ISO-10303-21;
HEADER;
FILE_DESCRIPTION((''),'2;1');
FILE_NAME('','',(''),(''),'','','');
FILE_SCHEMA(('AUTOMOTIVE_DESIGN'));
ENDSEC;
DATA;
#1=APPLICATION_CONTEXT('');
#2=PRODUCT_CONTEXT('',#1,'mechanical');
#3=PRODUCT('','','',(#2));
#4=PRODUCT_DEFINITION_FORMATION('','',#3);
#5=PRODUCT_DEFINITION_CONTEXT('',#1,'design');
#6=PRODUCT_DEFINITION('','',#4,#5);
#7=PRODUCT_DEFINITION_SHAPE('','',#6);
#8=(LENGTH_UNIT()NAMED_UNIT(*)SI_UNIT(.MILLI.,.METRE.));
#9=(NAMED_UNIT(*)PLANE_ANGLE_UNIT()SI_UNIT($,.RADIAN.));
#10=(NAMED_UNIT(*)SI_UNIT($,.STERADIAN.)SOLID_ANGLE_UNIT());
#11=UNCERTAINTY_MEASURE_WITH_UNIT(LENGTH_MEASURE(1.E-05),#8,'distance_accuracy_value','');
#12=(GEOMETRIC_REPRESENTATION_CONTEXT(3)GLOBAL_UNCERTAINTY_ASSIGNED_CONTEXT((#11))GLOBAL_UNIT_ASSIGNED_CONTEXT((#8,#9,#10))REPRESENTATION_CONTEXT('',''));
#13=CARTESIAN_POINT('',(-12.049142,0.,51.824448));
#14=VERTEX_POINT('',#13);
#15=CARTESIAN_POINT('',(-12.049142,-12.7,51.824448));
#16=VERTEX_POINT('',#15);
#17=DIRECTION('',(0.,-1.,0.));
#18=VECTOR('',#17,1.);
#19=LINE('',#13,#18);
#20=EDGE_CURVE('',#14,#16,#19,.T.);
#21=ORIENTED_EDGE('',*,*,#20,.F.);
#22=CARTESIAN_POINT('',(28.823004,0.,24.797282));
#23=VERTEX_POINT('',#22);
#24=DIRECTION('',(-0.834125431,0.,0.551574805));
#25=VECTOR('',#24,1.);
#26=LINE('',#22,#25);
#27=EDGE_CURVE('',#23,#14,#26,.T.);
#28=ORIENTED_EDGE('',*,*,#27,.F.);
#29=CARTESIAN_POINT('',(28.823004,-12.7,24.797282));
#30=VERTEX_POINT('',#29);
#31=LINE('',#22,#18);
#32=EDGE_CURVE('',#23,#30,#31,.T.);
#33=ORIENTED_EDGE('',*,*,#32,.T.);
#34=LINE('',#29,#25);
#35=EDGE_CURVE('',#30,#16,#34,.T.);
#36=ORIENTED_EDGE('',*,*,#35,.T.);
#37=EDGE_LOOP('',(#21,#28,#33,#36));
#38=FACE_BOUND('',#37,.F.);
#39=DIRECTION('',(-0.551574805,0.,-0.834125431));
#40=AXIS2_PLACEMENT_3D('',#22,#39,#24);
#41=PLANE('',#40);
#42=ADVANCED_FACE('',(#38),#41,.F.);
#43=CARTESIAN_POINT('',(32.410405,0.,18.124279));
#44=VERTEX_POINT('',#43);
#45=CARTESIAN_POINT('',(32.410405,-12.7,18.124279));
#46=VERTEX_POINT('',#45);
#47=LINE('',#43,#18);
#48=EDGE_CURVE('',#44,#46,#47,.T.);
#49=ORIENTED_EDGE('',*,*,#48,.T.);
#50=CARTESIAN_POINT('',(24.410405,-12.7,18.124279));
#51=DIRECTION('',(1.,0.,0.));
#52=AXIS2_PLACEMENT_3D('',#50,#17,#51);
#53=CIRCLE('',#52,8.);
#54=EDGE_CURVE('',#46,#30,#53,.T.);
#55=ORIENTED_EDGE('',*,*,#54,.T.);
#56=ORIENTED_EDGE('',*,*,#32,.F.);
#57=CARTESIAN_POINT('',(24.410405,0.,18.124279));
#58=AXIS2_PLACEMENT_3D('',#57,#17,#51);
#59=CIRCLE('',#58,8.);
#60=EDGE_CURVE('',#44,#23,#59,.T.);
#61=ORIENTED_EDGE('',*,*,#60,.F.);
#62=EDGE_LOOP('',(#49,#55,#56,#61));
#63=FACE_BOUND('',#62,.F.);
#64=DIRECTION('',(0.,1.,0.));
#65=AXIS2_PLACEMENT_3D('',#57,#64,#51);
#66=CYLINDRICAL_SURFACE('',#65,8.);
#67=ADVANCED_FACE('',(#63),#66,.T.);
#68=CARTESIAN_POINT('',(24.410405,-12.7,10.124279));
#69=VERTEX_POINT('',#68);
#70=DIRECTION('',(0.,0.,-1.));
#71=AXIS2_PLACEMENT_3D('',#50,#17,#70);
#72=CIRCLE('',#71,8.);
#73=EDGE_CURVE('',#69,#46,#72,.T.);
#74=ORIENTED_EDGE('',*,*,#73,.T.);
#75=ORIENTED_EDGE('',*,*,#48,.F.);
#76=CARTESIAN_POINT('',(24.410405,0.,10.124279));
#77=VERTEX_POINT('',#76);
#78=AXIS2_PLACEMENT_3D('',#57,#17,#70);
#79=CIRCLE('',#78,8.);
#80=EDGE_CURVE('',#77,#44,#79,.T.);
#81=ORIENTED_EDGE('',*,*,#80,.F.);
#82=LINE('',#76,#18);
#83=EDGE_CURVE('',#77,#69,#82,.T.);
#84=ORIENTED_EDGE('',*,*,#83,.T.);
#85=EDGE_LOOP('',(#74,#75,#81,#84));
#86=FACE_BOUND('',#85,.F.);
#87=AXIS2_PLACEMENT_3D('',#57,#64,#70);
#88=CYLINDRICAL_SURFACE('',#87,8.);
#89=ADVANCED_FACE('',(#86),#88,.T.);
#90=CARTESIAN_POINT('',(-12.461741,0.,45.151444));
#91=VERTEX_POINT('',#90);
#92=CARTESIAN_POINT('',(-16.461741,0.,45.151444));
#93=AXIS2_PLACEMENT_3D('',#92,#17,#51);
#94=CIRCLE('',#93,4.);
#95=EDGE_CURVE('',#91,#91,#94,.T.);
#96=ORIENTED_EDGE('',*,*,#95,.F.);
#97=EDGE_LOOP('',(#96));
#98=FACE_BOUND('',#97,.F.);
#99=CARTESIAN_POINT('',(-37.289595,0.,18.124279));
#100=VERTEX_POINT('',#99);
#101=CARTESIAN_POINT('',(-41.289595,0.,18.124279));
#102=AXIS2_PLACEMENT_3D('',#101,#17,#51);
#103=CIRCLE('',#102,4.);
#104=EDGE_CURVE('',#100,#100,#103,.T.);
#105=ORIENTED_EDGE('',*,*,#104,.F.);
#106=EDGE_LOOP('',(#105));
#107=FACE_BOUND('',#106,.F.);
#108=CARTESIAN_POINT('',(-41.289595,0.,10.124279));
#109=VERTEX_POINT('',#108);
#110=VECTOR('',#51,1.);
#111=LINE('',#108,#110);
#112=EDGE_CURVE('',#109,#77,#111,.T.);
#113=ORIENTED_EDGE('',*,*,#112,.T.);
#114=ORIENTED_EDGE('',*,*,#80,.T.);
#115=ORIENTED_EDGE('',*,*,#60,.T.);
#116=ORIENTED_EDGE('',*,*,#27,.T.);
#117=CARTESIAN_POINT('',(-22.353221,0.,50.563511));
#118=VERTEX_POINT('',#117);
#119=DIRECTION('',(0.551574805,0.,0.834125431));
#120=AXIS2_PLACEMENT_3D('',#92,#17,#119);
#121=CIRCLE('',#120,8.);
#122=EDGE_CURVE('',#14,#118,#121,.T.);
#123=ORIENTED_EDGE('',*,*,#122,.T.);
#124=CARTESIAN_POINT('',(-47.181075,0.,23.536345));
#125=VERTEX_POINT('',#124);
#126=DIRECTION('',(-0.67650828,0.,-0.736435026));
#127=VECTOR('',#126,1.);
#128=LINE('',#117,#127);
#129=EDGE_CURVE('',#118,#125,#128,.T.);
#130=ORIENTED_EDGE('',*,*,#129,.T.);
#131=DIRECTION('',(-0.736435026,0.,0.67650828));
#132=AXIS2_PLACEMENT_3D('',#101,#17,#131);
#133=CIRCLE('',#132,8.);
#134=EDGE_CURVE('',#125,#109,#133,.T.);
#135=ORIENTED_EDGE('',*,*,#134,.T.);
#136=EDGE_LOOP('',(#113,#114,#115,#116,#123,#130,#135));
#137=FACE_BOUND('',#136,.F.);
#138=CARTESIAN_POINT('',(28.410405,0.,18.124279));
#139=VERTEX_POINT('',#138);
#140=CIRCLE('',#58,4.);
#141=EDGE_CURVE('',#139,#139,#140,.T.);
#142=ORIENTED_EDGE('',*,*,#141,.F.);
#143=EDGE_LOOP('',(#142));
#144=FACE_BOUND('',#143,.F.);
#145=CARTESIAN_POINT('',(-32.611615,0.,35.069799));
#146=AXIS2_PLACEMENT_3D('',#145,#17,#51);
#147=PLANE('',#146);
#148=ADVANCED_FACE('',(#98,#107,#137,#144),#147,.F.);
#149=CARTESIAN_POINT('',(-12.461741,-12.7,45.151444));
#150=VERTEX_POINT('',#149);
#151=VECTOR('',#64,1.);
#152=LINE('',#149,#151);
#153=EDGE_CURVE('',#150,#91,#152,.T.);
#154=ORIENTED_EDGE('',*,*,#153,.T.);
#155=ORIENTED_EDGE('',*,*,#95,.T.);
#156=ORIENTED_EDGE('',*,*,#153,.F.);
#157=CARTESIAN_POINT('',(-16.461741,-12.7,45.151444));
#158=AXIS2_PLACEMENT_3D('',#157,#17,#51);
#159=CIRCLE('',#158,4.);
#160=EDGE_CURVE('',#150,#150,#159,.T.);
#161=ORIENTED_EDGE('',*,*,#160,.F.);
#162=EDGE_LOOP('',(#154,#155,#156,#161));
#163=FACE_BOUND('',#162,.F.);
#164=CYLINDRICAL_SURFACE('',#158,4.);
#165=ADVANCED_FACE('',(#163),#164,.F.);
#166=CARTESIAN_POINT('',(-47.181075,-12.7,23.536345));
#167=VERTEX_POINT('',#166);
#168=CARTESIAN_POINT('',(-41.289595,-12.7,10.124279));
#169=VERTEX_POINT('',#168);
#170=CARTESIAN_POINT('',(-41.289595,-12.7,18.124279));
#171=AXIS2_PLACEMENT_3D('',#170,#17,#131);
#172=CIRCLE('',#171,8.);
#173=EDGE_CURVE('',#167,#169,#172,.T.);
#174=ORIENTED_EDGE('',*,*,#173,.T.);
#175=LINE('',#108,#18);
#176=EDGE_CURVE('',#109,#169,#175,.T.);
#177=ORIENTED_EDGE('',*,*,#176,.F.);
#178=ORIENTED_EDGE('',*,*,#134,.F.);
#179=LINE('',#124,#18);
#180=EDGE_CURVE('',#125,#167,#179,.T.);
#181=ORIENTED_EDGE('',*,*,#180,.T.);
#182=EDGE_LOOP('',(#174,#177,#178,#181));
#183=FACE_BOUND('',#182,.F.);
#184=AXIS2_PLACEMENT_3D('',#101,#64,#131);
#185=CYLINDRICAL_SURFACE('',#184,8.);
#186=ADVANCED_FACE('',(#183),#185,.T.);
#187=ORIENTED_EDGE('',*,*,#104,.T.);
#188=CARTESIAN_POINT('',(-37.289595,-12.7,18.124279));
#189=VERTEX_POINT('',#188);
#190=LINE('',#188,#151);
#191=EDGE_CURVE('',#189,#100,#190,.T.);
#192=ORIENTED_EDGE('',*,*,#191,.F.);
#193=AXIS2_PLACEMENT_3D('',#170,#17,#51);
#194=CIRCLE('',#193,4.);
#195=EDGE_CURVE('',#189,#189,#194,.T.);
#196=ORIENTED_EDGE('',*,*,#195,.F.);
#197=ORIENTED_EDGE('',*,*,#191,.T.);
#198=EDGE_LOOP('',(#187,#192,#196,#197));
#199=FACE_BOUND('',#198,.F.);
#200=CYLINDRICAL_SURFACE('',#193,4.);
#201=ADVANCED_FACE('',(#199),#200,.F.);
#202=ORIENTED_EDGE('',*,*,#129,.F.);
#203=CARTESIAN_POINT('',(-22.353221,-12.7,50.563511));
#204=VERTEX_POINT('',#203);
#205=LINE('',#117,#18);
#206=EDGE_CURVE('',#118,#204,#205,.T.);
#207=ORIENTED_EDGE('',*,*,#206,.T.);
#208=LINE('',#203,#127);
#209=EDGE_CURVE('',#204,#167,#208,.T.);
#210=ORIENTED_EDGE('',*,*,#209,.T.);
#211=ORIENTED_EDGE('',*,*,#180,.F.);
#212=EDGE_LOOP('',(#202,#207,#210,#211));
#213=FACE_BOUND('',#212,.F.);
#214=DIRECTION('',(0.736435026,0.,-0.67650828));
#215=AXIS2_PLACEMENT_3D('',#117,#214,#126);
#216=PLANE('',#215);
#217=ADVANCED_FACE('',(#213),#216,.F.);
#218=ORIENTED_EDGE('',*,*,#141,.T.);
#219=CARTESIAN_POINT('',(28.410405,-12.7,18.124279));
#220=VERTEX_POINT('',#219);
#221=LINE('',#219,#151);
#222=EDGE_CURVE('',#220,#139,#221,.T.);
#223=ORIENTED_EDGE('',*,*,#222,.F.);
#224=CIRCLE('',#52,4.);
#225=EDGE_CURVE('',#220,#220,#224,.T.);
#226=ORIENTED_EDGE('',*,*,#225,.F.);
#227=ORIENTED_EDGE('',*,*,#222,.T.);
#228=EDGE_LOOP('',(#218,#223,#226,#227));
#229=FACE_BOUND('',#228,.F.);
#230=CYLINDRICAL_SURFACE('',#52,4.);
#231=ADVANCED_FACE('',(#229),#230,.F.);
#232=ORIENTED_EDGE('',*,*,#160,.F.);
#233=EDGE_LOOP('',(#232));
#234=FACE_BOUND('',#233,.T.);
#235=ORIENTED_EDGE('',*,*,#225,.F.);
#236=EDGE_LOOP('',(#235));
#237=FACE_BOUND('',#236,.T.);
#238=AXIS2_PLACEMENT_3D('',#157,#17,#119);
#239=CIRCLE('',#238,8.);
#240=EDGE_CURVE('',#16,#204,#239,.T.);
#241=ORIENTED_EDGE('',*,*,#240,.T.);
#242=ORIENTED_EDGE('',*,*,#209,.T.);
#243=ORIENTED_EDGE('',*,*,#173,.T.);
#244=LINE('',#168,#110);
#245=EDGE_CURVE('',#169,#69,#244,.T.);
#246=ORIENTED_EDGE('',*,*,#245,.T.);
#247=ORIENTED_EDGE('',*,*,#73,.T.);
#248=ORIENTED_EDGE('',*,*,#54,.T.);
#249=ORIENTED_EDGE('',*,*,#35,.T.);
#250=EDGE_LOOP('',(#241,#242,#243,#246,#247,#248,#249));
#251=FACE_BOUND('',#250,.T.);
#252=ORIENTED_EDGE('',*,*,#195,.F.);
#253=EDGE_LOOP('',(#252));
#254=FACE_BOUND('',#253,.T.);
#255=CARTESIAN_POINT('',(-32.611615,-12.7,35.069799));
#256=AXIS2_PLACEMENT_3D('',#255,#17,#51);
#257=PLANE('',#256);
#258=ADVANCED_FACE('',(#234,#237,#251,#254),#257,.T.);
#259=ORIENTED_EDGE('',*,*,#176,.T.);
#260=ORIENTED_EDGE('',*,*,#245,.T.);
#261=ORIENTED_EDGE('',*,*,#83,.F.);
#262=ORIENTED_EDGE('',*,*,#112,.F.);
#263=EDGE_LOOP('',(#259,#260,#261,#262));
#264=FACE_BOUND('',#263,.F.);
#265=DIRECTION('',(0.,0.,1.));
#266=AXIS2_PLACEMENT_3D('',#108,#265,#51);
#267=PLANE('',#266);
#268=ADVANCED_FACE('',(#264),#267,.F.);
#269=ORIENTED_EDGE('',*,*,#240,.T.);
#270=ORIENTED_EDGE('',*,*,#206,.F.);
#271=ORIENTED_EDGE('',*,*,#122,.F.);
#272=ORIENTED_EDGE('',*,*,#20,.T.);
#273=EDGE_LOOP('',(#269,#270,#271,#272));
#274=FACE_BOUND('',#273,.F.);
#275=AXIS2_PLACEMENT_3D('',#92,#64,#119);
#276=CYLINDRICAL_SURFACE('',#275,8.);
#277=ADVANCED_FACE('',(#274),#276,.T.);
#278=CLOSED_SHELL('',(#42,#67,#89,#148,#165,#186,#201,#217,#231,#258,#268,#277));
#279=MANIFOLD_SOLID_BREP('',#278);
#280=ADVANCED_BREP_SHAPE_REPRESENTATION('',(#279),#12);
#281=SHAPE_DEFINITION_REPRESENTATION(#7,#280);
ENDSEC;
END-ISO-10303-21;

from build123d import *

# Parameters (mm, degrees)
F1_DEPTH = 12.7
F2_R     = 4
F3_DEPTH = 12.7


with BuildPart() as f1:
    # F0 (on Front) → F1 (new body)
    with BuildSketch(Plane.XZ):
        with BuildLine():
            Line((-35.8775282965, 24.0157592565), (-21.8738068975, 39.259964286))
            ThreePointArc((-21.8738068975, 39.259964286), (-24.4545549996, 44.812447626), (-22.3532208609, 50.5635107317))
            Line((-22.3532208609, 50.5635107317), (-47.1810747422, 23.536345293))
            ThreePointArc((-47.1810747422, 23.536345293), (-41.6285914022, 26.1170933952), (-35.8775282965, 24.0157592565))
        make_face()
        with BuildLine():
            Line((-21.8738068975, 39.259964286), (-16.4617406563, 45.1514444906))
            Line((-16.4617406563, 45.1514444906), (-9.7887372084, 40.7388460516))
            ThreePointArc((-9.7887372084, 40.7388460516), (-8.8006693349, 42.8475377633), (-8.4617406563, 45.1514444906))
            ThreePointArc((-8.4617406563, 45.1514444906), (-9.4154371037, 48.939531903), (-12.0491422174, 51.8244479385))
            ThreePointArc((-12.0491422174, 51.8244479385), (-17.4334728618, 53.0922087183), (-22.3532208609, 50.5635107317))
            ThreePointArc((-22.3532208609, 50.5635107317), (-24.4545549996, 44.812447626), (-21.8738068975, 39.259964286))
        make_face()
        with BuildLine():
            ThreePointArc((-9.7887372084, 40.7388460516), (-15.4900084509, 37.2106802628), (-21.8738068975, 39.259964286))
            Line((-21.8738068975, 39.259964286), (-35.8775282965, 24.0157592565))
            ThreePointArc((-35.8775282965, 24.0157592565), (-33.9650969463, 21.3416902838), (-33.2895945376, 18.1242790519))
            Line((-33.2895945376, 18.1242790519), (16.4104054624, 18.1242790519))
            ThreePointArc((16.4104054624, 18.1242790519), (16.749334141, 20.4281857792), (17.7374020144, 22.5368774909))
            Line((17.7374020144, 22.5368774909), (-9.7887372084, 40.7388460516))
        make_face()
        with BuildLine():
            Line((-9.7887372084, 40.7388460516), (-16.4617406563, 45.1514444906))
            Line((-16.4617406563, 45.1514444906), (-21.8738068975, 39.259964286))
            ThreePointArc((-21.8738068975, 39.259964286), (-15.4900084509, 37.2106802628), (-9.7887372084, 40.7388460516))
        make_face()
        with BuildLine():
            ThreePointArc((-8.4617406563, 45.1514444906), (-8.8006693349, 42.8475377633), (-9.7887372084, 40.7388460516))
            Line((-9.7887372084, 40.7388460516), (17.7374020144, 22.5368774909))
            ThreePointArc((17.7374020144, 22.5368774909), (22.8120577523, 25.9629833197), (28.8230039014, 24.7972824999))
            Line((28.8230039014, 24.7972824999), (-12.0491422174, 51.8244479385))
            ThreePointArc((-12.0491422174, 51.8244479385), (-9.4154371037, 48.939531903), (-8.4617406563, 45.1514444906))
        make_face()
        with BuildLine():
            ThreePointArc((28.8230039014, 24.7972824999), (22.8120577523, 25.9629833197), (17.7374020144, 22.5368774909))
            Line((17.7374020144, 22.5368774909), (24.4104054624, 18.1242790519))
            Line((24.4104054624, 18.1242790519), (16.4104054624, 18.1242790519))
            ThreePointArc((16.4104054624, 18.1242790519), (18.7535512129, 12.4674248024), (24.4104054624, 10.1242790519))
            ThreePointArc((24.4104054624, 10.1242790519), (30.0672597119, 12.4674248024), (32.4104054624, 18.1242790519))
            ThreePointArc((32.4104054624, 18.1242790519), (31.456709015, 21.9123664643), (28.8230039014, 24.7972824999))
        make_face()
        with BuildLine():
            Line((24.4104054624, 18.1242790519), (17.7374020144, 22.5368774909))
            ThreePointArc((17.7374020144, 22.5368774909), (16.749334141, 20.4281857792), (16.4104054624, 18.1242790519))
            Line((16.4104054624, 18.1242790519), (24.4104054624, 18.1242790519))
        make_face()
        with BuildLine():
            Line((16.4104054624, 18.1242790519), (-33.2895945376, 18.1242790519))
            ThreePointArc((-33.2895945376, 18.1242790519), (-35.6327402881, 12.4674248024), (-41.2895945376, 10.1242790519))
            Line((-41.2895945376, 10.1242790519), (24.4104054624, 10.1242790519))
            ThreePointArc((24.4104054624, 10.1242790519), (18.7535512129, 12.4674248024), (16.4104054624, 18.1242790519))
        make_face()
        with BuildLine():
            Line((-41.2895945376, 18.1242790519), (-35.8775282965, 24.0157592565))
            ThreePointArc((-35.8775282965, 24.0157592565), (-41.6285914022, 26.1170933952), (-47.1810747422, 23.536345293))
            ThreePointArc((-47.1810747422, 23.536345293), (-48.6140921289, 14.90686782), (-41.2895945376, 10.1242790519))
            ThreePointArc((-41.2895945376, 10.1242790519), (-35.6327402881, 12.4674248024), (-33.2895945376, 18.1242790519))
            Line((-33.2895945376, 18.1242790519), (-41.2895945376, 18.1242790519))
        make_face()
        with BuildLine():
            ThreePointArc((-33.2895945376, 18.1242790519), (-33.9650969463, 21.3416902838), (-35.8775282965, 24.0157592565))
            Line((-35.8775282965, 24.0157592565), (-41.2895945376, 18.1242790519))
            Line((-41.2895945376, 18.1242790519), (-33.2895945376, 18.1242790519))
        make_face()
    extrude(amount=F1_DEPTH)

    # F2 (on face) → F3 (cut, through all)
    with BuildSketch(Plane.XZ.offset(12.7)):
        with Locations((-16.4617406563, 45.1514444906)):
            Circle(F2_R)
        with Locations((-41.2895945376, 18.1242790519)):
            Circle(F2_R)
        with Locations((24.4104054624, 18.1242790519)):
            Circle(F2_R)
    extrude(amount=-F3_DEPTH, mode=Mode.SUBTRACT)


solid = f1.part
